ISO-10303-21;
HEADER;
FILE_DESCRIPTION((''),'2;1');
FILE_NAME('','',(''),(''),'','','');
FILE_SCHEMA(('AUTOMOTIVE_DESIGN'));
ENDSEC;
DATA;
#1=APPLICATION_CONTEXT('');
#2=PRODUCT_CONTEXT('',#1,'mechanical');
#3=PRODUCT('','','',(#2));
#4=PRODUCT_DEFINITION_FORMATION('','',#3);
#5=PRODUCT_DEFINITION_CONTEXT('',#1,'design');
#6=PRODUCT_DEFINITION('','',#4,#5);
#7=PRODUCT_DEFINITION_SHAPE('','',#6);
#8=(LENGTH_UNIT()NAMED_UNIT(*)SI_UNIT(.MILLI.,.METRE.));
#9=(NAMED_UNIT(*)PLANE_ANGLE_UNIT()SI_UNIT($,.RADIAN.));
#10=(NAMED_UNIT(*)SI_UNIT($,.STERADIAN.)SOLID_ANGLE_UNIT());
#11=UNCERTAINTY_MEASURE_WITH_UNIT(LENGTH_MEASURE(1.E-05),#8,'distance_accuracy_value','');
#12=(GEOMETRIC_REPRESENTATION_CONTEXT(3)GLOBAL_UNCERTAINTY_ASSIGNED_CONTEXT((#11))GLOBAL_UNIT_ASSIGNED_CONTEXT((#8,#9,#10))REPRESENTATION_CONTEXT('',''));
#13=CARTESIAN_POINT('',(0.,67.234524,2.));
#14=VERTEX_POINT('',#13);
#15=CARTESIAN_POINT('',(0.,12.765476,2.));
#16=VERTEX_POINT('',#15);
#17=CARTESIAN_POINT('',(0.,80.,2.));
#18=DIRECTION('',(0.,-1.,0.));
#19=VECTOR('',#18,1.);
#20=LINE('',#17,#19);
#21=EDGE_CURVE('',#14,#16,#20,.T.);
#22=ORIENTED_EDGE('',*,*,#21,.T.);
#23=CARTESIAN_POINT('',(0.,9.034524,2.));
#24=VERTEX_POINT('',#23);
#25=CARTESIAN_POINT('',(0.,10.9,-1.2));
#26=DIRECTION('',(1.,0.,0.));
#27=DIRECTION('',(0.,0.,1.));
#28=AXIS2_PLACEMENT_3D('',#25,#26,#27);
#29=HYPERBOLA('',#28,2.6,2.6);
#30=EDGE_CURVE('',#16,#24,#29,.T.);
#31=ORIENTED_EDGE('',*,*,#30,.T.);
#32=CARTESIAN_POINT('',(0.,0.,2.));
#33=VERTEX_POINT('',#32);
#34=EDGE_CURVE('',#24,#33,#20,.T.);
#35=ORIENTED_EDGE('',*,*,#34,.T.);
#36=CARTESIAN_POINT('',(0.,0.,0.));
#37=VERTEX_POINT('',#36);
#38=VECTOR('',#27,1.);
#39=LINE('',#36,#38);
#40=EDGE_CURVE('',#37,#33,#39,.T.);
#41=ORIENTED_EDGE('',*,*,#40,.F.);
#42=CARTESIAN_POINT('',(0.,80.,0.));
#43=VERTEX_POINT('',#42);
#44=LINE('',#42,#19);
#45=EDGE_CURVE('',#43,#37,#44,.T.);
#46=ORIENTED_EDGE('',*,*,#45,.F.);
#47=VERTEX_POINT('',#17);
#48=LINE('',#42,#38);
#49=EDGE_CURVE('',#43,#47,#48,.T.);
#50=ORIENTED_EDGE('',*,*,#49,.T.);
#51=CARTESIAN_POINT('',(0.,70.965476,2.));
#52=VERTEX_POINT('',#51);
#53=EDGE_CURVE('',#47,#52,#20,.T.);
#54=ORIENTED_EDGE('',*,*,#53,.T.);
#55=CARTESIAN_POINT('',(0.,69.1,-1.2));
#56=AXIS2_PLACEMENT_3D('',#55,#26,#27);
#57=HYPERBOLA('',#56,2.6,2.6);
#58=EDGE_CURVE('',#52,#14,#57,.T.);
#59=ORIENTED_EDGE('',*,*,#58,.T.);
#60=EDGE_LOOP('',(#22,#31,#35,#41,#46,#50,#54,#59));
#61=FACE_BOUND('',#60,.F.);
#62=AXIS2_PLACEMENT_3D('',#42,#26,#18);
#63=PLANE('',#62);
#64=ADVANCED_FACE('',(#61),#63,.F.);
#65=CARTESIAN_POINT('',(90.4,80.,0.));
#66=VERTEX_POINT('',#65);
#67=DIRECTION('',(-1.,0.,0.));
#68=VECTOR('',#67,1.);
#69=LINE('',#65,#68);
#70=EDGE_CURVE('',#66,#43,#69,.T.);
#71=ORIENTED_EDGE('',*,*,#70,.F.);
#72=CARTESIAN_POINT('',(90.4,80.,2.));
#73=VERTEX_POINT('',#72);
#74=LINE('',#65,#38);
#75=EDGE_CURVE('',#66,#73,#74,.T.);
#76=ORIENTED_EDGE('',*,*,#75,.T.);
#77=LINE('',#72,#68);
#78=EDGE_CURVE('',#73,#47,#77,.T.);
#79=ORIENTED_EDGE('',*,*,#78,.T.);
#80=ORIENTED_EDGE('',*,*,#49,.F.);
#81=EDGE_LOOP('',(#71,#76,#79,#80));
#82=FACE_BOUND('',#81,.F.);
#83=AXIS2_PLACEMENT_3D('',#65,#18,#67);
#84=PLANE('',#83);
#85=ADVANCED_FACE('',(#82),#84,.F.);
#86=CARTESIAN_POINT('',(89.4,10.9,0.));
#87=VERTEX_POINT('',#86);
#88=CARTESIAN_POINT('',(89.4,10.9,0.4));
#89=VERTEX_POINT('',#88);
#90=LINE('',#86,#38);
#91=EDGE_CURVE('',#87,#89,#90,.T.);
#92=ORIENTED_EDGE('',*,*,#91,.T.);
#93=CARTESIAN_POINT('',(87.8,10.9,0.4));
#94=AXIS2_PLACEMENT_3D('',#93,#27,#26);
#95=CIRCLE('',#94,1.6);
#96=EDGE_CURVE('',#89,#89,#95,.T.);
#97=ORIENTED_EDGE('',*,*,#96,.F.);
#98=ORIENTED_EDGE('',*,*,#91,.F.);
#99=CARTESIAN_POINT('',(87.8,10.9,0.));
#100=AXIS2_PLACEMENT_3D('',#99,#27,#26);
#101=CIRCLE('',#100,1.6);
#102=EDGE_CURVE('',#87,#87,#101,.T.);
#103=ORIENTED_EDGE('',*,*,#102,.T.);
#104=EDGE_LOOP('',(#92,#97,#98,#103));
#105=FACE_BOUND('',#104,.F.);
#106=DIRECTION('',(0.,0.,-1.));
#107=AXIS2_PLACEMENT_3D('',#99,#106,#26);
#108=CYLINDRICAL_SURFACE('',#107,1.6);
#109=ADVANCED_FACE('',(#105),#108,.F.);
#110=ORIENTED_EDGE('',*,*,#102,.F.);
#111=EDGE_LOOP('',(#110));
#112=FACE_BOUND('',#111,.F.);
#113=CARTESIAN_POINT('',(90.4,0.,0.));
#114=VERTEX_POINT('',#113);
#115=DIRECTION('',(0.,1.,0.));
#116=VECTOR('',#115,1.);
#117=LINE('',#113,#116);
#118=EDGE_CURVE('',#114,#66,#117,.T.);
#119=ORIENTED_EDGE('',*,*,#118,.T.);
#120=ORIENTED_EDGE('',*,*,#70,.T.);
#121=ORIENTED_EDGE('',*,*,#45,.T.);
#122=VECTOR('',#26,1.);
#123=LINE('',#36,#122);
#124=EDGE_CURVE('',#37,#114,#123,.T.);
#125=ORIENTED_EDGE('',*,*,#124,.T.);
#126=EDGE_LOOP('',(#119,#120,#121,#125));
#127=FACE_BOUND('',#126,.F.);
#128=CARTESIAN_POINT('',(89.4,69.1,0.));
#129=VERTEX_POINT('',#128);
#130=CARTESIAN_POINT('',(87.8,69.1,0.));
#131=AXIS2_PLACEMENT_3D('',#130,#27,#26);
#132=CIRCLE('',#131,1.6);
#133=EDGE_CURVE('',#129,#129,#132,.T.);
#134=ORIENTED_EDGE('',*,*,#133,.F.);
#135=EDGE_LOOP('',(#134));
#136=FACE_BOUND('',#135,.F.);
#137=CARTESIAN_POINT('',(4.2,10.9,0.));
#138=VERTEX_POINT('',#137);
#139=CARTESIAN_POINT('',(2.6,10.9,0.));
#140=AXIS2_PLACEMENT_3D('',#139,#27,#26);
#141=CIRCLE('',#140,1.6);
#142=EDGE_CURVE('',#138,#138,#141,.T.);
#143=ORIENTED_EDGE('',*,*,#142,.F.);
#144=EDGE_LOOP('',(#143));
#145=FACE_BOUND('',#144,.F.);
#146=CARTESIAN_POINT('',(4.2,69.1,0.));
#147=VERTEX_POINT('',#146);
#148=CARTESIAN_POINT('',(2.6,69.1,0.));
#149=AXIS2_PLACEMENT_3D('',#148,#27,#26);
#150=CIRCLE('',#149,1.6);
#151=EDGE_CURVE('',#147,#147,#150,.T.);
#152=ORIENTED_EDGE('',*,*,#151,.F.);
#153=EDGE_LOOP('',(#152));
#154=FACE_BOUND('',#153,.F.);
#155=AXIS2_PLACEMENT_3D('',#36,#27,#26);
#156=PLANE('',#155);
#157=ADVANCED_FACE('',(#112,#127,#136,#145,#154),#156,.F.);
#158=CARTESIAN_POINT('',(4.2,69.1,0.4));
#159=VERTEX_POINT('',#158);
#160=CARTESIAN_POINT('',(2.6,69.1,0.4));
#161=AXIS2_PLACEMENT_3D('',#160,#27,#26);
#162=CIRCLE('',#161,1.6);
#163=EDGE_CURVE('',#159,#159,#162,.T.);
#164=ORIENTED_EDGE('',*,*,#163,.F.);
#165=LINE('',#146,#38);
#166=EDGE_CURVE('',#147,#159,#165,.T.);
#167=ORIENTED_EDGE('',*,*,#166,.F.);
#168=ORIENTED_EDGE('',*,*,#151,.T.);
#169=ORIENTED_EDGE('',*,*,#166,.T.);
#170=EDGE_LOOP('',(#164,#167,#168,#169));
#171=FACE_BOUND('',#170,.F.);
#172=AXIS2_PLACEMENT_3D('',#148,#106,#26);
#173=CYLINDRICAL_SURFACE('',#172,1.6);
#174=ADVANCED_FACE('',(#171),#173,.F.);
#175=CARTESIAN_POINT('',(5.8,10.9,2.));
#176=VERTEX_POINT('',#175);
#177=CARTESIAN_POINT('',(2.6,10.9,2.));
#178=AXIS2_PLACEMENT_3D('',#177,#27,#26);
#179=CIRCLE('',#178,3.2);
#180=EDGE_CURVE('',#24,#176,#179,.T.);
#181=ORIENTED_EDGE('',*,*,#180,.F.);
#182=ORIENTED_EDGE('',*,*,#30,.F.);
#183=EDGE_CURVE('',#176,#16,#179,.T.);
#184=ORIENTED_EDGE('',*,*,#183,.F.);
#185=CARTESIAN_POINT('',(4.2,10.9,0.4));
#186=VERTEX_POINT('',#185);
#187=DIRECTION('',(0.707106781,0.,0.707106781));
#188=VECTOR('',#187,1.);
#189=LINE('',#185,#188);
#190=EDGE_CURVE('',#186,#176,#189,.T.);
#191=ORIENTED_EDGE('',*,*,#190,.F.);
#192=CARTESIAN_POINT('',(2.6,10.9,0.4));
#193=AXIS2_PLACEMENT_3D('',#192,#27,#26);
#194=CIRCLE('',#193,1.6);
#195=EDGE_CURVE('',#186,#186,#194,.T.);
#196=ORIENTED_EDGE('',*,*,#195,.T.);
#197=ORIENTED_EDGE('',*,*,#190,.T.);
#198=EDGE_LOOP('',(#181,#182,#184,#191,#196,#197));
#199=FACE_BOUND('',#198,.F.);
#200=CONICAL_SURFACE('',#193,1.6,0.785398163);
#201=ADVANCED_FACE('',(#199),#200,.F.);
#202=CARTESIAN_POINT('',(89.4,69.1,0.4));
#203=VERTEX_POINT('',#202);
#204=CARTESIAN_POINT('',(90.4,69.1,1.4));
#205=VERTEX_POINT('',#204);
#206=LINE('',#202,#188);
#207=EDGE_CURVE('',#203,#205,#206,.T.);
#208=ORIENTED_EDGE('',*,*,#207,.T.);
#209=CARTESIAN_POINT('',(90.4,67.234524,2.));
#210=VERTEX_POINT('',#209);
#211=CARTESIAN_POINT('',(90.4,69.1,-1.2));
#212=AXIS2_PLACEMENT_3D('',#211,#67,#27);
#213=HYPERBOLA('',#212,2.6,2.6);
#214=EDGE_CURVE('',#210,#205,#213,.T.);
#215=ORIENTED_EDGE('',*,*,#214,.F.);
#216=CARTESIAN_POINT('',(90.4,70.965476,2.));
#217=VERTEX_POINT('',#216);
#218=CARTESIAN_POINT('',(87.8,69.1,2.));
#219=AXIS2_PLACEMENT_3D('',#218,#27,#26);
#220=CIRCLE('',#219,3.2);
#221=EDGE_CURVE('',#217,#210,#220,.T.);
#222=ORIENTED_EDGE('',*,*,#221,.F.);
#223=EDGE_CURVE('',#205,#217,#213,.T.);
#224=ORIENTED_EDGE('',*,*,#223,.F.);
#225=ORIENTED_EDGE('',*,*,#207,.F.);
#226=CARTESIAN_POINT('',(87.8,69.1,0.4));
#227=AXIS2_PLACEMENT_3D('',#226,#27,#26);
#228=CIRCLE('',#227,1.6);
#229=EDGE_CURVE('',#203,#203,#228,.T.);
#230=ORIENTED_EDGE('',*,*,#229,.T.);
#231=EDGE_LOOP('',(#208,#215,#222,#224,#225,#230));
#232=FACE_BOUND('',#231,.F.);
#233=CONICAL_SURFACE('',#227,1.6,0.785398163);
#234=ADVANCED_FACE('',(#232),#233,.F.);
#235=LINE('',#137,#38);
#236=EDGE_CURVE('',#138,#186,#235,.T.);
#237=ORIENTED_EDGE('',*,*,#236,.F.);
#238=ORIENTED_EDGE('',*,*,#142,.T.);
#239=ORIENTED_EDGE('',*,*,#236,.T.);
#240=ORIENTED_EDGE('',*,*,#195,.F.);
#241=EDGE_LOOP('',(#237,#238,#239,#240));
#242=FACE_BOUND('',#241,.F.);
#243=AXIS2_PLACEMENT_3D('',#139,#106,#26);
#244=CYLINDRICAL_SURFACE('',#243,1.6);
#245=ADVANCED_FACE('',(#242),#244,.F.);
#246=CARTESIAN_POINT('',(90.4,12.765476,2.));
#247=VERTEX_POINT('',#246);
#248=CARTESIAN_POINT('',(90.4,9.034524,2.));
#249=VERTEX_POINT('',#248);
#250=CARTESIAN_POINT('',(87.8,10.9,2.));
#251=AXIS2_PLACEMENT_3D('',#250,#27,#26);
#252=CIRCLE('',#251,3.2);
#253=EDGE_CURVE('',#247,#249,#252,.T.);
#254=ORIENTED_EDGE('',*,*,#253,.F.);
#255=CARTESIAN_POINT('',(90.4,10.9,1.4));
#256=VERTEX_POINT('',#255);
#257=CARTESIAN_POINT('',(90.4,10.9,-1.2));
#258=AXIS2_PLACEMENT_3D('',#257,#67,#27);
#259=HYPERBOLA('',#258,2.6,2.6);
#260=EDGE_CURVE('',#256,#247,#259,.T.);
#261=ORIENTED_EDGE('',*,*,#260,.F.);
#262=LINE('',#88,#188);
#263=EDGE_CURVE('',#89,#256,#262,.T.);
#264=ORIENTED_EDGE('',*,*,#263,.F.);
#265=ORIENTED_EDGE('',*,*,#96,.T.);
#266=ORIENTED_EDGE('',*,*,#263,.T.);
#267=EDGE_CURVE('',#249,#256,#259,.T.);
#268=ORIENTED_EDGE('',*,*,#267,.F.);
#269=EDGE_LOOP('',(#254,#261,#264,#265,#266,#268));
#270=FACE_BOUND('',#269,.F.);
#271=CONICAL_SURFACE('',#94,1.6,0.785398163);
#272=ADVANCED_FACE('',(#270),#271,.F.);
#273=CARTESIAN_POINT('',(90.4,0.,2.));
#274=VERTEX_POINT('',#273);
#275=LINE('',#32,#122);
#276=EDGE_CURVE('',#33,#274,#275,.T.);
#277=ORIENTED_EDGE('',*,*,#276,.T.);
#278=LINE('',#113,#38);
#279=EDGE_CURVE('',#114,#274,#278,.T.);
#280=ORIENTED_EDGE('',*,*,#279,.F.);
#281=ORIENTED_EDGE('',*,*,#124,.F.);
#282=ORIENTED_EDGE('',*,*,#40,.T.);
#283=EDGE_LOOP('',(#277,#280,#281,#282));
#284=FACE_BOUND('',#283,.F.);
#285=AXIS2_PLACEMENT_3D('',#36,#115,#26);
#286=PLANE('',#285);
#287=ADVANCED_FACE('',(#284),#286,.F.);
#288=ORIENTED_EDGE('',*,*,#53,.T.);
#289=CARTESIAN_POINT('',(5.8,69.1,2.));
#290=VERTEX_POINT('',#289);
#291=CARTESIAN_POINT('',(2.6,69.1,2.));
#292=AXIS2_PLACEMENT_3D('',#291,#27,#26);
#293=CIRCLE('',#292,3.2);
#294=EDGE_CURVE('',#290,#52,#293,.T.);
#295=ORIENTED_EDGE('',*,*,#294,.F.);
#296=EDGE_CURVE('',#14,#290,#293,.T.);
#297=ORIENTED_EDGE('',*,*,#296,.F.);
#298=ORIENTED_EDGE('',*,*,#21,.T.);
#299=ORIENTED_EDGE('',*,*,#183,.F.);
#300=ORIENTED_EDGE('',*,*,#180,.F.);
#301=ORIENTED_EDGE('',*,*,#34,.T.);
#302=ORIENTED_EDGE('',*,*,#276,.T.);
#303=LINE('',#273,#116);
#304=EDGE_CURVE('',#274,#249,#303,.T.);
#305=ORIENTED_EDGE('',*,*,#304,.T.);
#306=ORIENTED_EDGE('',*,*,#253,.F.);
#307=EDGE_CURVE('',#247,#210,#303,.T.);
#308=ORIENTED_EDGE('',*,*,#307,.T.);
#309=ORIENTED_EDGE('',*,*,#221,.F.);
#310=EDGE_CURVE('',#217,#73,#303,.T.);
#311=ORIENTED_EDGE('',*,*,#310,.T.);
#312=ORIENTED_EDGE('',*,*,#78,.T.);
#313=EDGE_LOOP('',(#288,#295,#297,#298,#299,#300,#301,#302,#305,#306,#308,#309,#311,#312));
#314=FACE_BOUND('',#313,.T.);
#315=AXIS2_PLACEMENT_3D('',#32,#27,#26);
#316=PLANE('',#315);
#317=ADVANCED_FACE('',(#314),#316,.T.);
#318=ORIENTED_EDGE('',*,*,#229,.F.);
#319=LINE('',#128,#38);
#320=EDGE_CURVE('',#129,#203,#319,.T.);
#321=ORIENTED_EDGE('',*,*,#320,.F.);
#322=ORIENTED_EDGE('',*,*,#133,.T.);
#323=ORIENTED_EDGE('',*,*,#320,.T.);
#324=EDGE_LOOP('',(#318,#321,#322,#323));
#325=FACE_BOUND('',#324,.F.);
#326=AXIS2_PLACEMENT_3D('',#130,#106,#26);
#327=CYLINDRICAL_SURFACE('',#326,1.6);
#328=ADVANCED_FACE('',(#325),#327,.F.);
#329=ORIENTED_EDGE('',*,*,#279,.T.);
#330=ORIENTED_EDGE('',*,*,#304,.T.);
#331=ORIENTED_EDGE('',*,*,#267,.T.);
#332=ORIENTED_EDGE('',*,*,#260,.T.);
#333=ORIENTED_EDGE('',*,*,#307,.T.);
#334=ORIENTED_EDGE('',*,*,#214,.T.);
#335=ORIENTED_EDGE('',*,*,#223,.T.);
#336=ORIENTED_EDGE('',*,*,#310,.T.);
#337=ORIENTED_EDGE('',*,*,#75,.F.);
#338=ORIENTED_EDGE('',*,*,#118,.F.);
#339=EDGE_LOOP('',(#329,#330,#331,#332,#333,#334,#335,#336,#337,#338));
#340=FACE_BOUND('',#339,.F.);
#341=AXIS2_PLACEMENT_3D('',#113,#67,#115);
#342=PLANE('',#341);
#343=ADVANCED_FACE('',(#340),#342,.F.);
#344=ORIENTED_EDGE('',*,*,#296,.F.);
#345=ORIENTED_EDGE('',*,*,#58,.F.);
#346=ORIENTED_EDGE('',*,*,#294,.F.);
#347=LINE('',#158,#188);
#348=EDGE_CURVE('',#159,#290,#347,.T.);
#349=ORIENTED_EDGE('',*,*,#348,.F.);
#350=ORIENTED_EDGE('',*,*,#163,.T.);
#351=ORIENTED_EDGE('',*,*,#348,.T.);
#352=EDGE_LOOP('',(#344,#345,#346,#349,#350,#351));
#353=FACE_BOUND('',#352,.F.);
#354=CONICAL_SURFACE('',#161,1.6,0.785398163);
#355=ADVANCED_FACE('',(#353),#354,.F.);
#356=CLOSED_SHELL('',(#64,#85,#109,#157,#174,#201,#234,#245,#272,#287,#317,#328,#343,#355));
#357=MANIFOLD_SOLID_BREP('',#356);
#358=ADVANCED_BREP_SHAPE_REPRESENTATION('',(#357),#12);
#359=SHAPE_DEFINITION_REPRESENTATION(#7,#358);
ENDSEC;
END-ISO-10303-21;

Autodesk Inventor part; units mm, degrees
ref_plane "YZ Plane" through (0, 0, 0) normal (1, 0, 0) x (0, 1, 0)
ref_plane "XZ Plane" through (0, 0, 0) normal (0, 1, 0) x (-1, 0, 0)
ref_plane "XY Plane" through (0, 0, 0) normal (0, 0, 1) x (1, 0, 0)
sketch "Skizze1" plane through (0, 0, 0) normal (0, 0, 1) x (1, 0, 0)
  line L0 (0, 0) -> (90.4, 0)
  line L1 (90.4, 0) -> (90.4, 80)
  line L2 (90.4, 80) -> (0, 80)
  line L3 (0, 80) -> (0, 0)
  line L4 (2.6, 69.1) -> (87.8, 69.1) construction
  line L5 (87.8, 69.1) -> (87.8, 10.9) construction
  circle A0 centre (2.6, 69.1) radius 1.6
  circle A1 centre (2.6, 10.9) radius 1.6
  circle A2 centre (87.8, 69.1) radius 1.6
  circle A3 centre (87.8, 10.9) radius 1.6
  line L6 (65.2, 69.1) -> (82.75, 69.1) construction
  line L7 (25.2, 69.1) -> (42.75, 69.1) construction
  dimension "d0" = 90.4
  dimension "d1" = 80
  dimension "d5" = 87.8
  dimension "d6" = 3.2
extrude "Extrusion1" add sketch "Skizze1" along normal blind 2
chamfer "Fase1" distance 1.6 angle 45 4 edges at (86.2, 10.9, 2) (1, 10.9, 2) (1, 69.1, 2) (86.2, 69.1, 2)
properties part number "blech_2mm"
